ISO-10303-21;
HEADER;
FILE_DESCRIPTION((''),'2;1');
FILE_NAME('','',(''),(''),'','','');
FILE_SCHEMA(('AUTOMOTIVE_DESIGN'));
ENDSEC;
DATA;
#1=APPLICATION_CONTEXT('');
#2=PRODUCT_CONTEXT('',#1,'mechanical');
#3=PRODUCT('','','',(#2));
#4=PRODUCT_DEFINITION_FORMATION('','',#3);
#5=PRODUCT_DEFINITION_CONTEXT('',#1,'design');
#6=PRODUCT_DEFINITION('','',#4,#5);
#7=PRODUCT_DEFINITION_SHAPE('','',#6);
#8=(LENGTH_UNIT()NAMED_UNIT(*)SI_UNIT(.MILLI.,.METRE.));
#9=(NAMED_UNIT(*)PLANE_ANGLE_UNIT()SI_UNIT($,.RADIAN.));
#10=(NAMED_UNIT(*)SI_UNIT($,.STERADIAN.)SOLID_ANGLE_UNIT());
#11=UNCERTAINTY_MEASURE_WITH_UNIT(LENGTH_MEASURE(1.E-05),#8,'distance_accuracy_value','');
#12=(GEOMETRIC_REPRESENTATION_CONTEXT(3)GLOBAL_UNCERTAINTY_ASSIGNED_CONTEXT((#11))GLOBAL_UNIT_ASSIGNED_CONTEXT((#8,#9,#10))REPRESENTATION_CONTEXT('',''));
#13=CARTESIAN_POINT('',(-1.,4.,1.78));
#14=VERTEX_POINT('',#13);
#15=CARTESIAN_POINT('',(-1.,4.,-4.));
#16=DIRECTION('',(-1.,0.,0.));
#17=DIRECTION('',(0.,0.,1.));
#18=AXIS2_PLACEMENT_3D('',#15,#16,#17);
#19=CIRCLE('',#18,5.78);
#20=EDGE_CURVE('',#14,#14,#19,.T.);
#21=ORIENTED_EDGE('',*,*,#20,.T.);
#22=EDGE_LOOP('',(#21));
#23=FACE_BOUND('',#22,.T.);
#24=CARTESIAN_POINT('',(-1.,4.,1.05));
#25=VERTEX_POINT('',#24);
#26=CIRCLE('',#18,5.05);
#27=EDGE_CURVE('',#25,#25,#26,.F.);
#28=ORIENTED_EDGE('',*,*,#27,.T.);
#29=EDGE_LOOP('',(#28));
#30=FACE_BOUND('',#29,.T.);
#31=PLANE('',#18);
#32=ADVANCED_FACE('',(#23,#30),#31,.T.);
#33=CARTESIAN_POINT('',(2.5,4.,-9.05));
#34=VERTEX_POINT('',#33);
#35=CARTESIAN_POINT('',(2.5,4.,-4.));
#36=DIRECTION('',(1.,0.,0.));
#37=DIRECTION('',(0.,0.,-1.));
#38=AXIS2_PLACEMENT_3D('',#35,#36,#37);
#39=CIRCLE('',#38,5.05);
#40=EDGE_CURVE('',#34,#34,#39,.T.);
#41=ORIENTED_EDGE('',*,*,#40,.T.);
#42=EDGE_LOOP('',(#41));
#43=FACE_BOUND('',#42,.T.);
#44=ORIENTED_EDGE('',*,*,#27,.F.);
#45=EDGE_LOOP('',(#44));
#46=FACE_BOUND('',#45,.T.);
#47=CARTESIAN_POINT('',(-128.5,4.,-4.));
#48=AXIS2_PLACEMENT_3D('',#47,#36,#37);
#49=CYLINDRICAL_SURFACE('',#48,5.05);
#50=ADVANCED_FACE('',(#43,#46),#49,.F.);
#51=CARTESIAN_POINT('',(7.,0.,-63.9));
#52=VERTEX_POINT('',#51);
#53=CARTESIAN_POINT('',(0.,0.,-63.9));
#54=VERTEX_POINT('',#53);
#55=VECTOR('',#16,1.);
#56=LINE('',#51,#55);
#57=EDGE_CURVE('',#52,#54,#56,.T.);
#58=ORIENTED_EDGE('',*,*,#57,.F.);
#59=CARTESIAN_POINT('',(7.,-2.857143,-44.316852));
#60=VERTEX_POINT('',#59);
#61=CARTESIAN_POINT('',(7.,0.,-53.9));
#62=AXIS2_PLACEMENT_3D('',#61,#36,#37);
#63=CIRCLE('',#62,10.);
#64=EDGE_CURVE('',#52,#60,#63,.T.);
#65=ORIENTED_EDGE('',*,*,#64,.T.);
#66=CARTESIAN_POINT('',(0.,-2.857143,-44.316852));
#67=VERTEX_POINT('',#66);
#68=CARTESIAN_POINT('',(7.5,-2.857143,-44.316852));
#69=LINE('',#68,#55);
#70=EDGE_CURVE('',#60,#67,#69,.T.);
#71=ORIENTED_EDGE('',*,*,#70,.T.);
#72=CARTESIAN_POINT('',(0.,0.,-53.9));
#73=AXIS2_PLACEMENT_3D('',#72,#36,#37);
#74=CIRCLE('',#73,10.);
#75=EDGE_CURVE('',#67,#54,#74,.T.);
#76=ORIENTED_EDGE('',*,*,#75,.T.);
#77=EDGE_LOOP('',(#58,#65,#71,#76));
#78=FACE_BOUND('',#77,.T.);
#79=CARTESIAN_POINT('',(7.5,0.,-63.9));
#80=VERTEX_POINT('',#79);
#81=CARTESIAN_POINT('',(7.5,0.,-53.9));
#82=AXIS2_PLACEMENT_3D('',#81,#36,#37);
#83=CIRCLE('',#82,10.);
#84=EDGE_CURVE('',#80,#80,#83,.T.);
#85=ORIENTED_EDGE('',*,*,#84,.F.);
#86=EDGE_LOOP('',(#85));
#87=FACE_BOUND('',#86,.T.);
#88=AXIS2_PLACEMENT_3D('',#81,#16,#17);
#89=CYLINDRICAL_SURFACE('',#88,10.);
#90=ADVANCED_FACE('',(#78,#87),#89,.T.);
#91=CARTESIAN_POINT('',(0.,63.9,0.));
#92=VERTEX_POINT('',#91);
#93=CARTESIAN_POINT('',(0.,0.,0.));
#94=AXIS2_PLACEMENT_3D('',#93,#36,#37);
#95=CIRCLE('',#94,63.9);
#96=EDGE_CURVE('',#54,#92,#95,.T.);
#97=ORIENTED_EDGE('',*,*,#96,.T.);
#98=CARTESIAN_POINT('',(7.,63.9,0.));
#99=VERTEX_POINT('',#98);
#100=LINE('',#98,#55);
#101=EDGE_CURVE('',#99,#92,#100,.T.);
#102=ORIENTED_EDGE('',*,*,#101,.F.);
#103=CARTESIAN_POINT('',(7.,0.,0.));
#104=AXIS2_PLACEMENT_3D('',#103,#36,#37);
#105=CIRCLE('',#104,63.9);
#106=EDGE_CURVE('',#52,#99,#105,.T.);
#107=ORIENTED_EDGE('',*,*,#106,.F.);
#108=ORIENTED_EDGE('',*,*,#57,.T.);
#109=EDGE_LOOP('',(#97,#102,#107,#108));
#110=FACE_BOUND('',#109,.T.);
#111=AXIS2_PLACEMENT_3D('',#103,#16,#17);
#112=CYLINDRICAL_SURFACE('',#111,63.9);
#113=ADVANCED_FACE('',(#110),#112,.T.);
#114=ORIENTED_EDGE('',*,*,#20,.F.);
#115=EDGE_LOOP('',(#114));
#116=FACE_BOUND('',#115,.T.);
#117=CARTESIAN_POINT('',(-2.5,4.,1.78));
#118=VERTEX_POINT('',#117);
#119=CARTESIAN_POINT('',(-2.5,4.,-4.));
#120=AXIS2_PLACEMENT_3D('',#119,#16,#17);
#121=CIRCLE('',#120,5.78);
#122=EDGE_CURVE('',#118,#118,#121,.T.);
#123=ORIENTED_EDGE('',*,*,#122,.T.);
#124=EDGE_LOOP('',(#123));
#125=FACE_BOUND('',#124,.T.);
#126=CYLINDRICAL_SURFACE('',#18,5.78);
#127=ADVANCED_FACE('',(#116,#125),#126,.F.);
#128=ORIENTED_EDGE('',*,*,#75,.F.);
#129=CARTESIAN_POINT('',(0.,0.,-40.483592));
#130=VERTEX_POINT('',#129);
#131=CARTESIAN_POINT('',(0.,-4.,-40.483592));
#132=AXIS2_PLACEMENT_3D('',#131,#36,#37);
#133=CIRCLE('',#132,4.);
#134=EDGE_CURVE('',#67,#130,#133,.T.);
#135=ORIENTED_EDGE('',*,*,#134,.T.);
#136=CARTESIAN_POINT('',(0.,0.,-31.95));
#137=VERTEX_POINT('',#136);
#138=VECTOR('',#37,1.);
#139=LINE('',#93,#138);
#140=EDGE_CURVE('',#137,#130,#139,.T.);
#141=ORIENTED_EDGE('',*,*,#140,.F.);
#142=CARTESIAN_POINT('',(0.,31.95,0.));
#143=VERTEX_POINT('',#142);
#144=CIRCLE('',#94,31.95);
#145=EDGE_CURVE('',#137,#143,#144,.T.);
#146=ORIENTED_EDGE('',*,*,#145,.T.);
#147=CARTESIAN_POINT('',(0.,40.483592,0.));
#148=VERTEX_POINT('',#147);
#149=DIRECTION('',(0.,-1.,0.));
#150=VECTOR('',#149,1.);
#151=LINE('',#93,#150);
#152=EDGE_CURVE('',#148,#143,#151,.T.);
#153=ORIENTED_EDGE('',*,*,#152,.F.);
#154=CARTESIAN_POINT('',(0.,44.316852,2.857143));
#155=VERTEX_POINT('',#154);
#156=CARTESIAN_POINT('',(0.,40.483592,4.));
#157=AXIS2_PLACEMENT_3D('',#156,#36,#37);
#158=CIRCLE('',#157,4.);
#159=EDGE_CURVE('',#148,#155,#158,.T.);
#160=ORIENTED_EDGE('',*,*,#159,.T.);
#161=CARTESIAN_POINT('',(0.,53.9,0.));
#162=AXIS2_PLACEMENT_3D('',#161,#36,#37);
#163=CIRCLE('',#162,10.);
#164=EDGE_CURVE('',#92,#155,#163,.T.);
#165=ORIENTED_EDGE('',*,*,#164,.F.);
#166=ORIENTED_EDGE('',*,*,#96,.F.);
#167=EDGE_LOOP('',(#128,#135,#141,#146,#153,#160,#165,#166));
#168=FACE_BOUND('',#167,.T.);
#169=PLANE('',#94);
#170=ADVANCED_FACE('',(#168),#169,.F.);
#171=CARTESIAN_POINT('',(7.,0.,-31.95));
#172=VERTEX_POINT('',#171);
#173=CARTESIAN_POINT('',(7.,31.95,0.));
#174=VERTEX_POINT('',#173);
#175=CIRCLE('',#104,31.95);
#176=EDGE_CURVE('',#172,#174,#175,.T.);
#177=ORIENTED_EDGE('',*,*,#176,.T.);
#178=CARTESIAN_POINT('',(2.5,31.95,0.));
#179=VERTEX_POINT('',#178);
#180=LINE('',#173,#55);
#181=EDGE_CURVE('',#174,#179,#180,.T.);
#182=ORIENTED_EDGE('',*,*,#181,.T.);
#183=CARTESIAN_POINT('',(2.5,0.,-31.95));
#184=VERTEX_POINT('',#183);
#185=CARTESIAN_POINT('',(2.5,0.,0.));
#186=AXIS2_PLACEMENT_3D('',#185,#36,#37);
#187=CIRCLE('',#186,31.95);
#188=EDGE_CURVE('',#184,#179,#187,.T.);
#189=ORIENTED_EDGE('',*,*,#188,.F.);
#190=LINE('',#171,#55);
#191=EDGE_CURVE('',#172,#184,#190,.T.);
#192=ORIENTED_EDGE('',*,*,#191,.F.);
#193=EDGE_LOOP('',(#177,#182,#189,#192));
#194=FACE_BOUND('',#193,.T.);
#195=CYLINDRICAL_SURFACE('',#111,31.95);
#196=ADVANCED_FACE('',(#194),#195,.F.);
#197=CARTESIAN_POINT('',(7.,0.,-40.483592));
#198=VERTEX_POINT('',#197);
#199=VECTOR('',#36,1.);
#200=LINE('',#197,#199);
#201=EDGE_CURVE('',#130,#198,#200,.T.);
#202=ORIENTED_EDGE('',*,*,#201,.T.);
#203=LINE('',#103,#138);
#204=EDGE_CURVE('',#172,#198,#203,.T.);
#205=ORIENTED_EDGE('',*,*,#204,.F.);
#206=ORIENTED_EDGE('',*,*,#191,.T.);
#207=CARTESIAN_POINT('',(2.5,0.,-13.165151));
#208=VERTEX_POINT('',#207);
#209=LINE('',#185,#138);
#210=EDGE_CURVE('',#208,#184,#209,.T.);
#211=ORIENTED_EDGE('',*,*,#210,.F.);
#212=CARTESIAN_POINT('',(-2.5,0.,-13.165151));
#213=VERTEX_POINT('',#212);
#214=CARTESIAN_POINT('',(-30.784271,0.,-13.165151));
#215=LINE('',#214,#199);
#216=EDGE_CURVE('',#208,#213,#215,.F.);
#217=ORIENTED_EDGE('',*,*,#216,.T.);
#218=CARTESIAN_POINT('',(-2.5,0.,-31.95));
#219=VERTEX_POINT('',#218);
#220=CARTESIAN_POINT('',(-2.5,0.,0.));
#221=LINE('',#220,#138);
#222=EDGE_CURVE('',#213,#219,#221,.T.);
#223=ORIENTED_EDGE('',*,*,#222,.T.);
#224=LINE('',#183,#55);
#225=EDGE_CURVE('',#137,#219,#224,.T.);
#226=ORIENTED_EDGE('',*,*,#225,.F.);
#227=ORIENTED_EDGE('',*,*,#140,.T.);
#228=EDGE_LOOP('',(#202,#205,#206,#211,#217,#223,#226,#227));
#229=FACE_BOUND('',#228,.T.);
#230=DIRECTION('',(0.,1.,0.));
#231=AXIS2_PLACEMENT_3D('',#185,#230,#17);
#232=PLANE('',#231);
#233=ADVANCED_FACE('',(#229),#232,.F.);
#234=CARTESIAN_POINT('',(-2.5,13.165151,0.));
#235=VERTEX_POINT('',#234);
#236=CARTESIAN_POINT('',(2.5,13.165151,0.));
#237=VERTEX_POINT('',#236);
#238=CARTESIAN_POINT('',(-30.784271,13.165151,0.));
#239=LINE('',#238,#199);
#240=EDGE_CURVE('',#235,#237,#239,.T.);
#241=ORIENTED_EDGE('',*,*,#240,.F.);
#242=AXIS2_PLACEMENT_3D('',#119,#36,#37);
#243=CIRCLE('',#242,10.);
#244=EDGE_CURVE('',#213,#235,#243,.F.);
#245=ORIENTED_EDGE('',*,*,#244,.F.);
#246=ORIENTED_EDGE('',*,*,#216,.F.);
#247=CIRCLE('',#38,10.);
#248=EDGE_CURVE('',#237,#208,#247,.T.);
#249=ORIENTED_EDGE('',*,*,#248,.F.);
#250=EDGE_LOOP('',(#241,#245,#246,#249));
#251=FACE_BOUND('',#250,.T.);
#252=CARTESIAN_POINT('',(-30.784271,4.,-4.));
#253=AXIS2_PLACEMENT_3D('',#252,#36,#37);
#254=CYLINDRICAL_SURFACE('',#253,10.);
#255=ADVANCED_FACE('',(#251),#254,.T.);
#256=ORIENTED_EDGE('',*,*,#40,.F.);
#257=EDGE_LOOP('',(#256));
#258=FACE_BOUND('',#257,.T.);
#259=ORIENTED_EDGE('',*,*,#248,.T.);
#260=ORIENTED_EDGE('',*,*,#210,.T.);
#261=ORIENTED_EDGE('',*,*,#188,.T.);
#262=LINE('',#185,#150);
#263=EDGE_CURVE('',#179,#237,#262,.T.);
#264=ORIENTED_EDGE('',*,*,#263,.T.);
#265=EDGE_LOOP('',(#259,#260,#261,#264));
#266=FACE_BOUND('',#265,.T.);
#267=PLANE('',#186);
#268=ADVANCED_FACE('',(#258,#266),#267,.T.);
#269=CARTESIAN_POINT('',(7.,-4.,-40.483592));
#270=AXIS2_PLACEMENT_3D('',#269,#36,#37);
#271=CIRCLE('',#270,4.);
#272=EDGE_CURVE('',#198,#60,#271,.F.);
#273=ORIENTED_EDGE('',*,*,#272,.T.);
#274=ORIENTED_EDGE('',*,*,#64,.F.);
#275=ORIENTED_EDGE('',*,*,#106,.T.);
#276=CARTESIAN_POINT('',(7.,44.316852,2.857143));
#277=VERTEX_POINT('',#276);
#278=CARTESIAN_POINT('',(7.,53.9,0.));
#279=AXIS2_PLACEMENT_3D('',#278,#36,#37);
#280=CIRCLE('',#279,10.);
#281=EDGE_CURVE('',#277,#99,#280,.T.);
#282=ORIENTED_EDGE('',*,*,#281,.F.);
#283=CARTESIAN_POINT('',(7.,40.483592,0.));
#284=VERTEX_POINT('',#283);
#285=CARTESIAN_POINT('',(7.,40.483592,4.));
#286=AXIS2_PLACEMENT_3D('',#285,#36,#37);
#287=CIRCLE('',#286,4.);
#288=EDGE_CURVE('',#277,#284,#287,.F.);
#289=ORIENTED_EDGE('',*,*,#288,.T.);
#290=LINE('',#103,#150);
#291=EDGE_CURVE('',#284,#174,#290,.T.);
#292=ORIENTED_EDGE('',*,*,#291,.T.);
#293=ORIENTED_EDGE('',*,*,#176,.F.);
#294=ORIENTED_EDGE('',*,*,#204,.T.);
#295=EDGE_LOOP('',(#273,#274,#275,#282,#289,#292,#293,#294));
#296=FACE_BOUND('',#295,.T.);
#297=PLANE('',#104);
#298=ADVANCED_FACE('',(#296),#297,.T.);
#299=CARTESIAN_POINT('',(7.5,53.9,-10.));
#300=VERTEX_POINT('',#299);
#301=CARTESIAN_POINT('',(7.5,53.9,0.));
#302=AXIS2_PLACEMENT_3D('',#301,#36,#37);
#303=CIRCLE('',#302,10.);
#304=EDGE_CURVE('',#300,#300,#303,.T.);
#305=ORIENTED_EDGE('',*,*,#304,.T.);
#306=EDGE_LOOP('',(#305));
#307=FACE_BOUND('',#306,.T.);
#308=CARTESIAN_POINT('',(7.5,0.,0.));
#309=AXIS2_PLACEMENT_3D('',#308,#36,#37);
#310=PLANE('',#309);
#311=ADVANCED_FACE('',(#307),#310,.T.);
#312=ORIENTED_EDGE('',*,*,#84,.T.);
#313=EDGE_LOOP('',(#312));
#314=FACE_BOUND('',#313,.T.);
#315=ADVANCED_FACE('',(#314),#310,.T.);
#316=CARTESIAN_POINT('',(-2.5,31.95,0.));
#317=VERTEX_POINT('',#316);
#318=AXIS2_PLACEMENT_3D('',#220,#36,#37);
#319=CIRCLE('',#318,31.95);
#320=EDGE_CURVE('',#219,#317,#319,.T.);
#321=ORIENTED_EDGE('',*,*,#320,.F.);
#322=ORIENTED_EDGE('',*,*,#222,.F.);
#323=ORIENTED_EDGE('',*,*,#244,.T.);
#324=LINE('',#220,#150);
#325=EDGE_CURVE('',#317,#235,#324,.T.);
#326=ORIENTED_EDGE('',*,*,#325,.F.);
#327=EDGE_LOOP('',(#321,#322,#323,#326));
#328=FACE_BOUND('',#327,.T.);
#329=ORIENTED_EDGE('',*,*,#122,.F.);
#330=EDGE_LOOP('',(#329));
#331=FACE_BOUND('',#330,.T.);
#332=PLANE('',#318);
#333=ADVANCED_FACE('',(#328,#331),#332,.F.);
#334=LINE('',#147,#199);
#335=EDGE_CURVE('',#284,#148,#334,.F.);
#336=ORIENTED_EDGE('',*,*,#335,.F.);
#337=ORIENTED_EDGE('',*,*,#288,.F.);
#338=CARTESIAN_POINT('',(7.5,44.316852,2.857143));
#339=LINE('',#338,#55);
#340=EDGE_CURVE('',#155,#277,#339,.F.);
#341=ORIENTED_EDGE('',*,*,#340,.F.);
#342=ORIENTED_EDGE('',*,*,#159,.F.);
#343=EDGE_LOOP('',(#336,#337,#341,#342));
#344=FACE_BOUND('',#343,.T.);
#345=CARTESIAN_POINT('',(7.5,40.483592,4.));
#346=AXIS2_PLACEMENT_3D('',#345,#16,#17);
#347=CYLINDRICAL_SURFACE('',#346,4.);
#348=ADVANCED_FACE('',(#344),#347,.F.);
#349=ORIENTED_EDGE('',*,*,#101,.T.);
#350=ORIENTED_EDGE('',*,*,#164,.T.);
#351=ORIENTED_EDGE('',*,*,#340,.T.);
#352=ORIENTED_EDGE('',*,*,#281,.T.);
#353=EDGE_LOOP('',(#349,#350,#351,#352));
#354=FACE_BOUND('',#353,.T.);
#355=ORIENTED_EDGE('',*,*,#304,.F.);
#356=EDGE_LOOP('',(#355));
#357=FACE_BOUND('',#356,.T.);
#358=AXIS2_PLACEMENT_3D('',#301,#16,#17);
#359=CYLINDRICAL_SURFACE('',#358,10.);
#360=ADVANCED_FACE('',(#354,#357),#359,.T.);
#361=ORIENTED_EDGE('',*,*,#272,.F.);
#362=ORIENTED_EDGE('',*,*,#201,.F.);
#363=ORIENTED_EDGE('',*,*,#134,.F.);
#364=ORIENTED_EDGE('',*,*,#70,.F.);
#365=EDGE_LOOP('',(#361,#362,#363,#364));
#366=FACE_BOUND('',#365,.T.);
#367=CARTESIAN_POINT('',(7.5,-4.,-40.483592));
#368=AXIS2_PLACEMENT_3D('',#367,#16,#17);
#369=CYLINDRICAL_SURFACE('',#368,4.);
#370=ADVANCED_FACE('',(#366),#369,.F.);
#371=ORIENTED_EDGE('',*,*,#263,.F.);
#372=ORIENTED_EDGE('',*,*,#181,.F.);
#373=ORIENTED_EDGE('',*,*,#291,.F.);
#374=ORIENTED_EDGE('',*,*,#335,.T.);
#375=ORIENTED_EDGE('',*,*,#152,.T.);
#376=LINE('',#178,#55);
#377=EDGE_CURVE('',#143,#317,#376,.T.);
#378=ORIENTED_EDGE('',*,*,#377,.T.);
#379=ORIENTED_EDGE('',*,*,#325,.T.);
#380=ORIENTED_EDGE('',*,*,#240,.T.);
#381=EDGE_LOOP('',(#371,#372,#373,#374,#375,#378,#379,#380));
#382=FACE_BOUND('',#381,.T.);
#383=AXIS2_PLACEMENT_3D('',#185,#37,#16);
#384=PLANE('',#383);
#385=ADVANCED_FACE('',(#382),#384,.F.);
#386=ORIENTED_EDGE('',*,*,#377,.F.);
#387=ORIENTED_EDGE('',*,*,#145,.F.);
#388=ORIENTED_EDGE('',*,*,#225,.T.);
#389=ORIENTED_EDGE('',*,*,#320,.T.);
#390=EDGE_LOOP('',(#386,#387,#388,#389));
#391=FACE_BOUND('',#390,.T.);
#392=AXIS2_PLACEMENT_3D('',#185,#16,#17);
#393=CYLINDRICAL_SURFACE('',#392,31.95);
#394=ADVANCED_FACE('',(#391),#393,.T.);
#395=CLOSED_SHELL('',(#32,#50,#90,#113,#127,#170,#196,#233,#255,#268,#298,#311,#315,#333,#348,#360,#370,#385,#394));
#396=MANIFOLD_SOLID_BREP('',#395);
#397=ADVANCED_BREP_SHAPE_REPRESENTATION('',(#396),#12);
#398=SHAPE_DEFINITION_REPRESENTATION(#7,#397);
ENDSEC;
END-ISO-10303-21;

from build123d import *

# Parameters (mm, degrees)
SALIENTE_EXTRUIR1_DEPTH = 2.5
SALIENTE_EXTRUIR2_START = 7
SALIENTE_EXTRUIR2_DEPTH = 7
SALIENTE_EXTRUIR3_START = 7.5
CROQUIS2_4_R            = 10
SALIENTE_EXTRUIR3_DEPTH = 7.5
REDONDEO1_R             = 4
REDONDEO2_R             = 4
CROQUIS3_R              = 10
SALIENTE_EXTRUIR4_DEPTH = 5
CROQUIS4_R              = 5.05
CORTAR_EXTRUIR1_DEPTH   = 131
CROQUIS5_R              = 5.78
CORTAR_EXTRUIR2_DEPTH   = 1.5


with BuildPart() as part:
    # Croquis2 → Saliente-Extruir1 (new, symmetric)
    with BuildSketch(Plane(origin=(0, 0, 0), x_dir=(0, 0, -1), z_dir=(1, 0, 0))):
        with BuildLine():
            ThreePointArc((31.95, 0), (22.592061659, 22.592061659), (0, 31.95))
            Line((0, 31.95), (0, 0))
            Line((0, 0), (31.95, 0))
        make_face()
    extrude(amount=SALIENTE_EXTRUIR1_DEPTH, both=True)

    # Croquis2<3> → Saliente-Extruir2 (add)
    with BuildSketch(Plane(origin=(0, 0, 0), x_dir=(0, 0, -1), z_dir=(1, 0, 0)).offset(SALIENTE_EXTRUIR2_START)):
        with BuildLine():
            ThreePointArc((10, 53.9), (7.071067812, 46.828932188), (0, 43.9))
            Line((0, 43.9), (0, 31.95))
            ThreePointArc((0, 31.95), (22.592061659, 22.592061659), (31.95, 0))
            Line((31.95, 0), (43.9, 0))
            ThreePointArc((43.9, 0), (53.9, 10), (63.9, 0))
            ThreePointArc((63.9, 0), (45.184123318, 45.184123318), (0, 63.9))
            ThreePointArc((0, 63.9), (7.071067812, 60.971067812), (10, 53.9))
        make_face()
    extrude(amount=-SALIENTE_EXTRUIR2_DEPTH)

    # Croquis2<4> → Saliente-Extruir3 (add)
    with BuildSketch(Plane(origin=(0, 0, 0), x_dir=(0, 0, -1), z_dir=(1, 0, 0)).offset(SALIENTE_EXTRUIR3_START)):
        with Locations(Location((0, 53.9, 0), (0, 0, 270))):
            Circle(CROQUIS2_4_R)
        with Locations((53.9, 0)):
            Circle(CROQUIS2_4_R)
    extrude(amount=-SALIENTE_EXTRUIR3_DEPTH)

    # Redondeo1
    redondeo1_edges = [part.edges().sort_by_distance(p)[0] for p in [
        (0, 0, 0),
    ]]
    fillet(redondeo1_edges, radius=REDONDEO1_R)

    # Redondeo2
    # the kernel refuses this fillet: 4 mm, written as the material it adds along each edge
    with BuildSketch(Plane(origin=(7, 0, -43.9), x_dir=(0, 0, 1), z_dir=(-1, 0, 0))) as redondeo2_piece_1:
        with BuildLine():
            CenterArc((3.416407865, -4), REDONDEO2_R, 90, 73.398450401)
            ThreePointArc((-0.416851525, -2.857142857), (-0.104761631, -1.443695821), (0, 0))
            Line((0, 0), (3.416407865, 0))
        make_face()
    extrude(amount=7)
    with BuildSketch(Plane(origin=(7, 43.9, 0), x_dir=(0, -1, 0), z_dir=(-1, 0, 0))) as redondeo2_piece_2:
        with BuildLine():
            CenterArc((3.416407865, 4), REDONDEO2_R, 196.601549599, 73.398450401)
            ThreePointArc((-0.416851525, 2.857142857), (-0.104761631, 1.443695821), (0, 0))
            Line((0, 0), (3.416407865, 0))
        make_face()
    extrude(amount=7)

    # Croquis3 → Saliente-Extruir4 (add)
    with BuildSketch(Plane(origin=(2.5, 0, 0), x_dir=(0, 0, -1), z_dir=(1, 0, 0))):
        with Locations((4, 4)):
            Circle(CROQUIS3_R)
    extrude(amount=-SALIENTE_EXTRUIR4_DEPTH)

    # Croquis4 → Cortar-Extruir1 (cut)
    with BuildSketch(Plane(origin=(2.5, 0, 0), x_dir=(0, 0, -1), z_dir=(1, 0, 0))):
        with Locations((4, 4)):
            Circle(CROQUIS4_R)
    extrude(amount=-CORTAR_EXTRUIR1_DEPTH, mode=Mode.SUBTRACT)

    # Croquis5 → Cortar-Extruir2 (cut)
    with BuildSketch(Plane.ZY.offset(2.5)):
        with Locations((-4, 4)):
            Circle(CROQUIS5_R)
    extrude(amount=-CORTAR_EXTRUIR2_DEPTH, mode=Mode.SUBTRACT)


solid = part.part
